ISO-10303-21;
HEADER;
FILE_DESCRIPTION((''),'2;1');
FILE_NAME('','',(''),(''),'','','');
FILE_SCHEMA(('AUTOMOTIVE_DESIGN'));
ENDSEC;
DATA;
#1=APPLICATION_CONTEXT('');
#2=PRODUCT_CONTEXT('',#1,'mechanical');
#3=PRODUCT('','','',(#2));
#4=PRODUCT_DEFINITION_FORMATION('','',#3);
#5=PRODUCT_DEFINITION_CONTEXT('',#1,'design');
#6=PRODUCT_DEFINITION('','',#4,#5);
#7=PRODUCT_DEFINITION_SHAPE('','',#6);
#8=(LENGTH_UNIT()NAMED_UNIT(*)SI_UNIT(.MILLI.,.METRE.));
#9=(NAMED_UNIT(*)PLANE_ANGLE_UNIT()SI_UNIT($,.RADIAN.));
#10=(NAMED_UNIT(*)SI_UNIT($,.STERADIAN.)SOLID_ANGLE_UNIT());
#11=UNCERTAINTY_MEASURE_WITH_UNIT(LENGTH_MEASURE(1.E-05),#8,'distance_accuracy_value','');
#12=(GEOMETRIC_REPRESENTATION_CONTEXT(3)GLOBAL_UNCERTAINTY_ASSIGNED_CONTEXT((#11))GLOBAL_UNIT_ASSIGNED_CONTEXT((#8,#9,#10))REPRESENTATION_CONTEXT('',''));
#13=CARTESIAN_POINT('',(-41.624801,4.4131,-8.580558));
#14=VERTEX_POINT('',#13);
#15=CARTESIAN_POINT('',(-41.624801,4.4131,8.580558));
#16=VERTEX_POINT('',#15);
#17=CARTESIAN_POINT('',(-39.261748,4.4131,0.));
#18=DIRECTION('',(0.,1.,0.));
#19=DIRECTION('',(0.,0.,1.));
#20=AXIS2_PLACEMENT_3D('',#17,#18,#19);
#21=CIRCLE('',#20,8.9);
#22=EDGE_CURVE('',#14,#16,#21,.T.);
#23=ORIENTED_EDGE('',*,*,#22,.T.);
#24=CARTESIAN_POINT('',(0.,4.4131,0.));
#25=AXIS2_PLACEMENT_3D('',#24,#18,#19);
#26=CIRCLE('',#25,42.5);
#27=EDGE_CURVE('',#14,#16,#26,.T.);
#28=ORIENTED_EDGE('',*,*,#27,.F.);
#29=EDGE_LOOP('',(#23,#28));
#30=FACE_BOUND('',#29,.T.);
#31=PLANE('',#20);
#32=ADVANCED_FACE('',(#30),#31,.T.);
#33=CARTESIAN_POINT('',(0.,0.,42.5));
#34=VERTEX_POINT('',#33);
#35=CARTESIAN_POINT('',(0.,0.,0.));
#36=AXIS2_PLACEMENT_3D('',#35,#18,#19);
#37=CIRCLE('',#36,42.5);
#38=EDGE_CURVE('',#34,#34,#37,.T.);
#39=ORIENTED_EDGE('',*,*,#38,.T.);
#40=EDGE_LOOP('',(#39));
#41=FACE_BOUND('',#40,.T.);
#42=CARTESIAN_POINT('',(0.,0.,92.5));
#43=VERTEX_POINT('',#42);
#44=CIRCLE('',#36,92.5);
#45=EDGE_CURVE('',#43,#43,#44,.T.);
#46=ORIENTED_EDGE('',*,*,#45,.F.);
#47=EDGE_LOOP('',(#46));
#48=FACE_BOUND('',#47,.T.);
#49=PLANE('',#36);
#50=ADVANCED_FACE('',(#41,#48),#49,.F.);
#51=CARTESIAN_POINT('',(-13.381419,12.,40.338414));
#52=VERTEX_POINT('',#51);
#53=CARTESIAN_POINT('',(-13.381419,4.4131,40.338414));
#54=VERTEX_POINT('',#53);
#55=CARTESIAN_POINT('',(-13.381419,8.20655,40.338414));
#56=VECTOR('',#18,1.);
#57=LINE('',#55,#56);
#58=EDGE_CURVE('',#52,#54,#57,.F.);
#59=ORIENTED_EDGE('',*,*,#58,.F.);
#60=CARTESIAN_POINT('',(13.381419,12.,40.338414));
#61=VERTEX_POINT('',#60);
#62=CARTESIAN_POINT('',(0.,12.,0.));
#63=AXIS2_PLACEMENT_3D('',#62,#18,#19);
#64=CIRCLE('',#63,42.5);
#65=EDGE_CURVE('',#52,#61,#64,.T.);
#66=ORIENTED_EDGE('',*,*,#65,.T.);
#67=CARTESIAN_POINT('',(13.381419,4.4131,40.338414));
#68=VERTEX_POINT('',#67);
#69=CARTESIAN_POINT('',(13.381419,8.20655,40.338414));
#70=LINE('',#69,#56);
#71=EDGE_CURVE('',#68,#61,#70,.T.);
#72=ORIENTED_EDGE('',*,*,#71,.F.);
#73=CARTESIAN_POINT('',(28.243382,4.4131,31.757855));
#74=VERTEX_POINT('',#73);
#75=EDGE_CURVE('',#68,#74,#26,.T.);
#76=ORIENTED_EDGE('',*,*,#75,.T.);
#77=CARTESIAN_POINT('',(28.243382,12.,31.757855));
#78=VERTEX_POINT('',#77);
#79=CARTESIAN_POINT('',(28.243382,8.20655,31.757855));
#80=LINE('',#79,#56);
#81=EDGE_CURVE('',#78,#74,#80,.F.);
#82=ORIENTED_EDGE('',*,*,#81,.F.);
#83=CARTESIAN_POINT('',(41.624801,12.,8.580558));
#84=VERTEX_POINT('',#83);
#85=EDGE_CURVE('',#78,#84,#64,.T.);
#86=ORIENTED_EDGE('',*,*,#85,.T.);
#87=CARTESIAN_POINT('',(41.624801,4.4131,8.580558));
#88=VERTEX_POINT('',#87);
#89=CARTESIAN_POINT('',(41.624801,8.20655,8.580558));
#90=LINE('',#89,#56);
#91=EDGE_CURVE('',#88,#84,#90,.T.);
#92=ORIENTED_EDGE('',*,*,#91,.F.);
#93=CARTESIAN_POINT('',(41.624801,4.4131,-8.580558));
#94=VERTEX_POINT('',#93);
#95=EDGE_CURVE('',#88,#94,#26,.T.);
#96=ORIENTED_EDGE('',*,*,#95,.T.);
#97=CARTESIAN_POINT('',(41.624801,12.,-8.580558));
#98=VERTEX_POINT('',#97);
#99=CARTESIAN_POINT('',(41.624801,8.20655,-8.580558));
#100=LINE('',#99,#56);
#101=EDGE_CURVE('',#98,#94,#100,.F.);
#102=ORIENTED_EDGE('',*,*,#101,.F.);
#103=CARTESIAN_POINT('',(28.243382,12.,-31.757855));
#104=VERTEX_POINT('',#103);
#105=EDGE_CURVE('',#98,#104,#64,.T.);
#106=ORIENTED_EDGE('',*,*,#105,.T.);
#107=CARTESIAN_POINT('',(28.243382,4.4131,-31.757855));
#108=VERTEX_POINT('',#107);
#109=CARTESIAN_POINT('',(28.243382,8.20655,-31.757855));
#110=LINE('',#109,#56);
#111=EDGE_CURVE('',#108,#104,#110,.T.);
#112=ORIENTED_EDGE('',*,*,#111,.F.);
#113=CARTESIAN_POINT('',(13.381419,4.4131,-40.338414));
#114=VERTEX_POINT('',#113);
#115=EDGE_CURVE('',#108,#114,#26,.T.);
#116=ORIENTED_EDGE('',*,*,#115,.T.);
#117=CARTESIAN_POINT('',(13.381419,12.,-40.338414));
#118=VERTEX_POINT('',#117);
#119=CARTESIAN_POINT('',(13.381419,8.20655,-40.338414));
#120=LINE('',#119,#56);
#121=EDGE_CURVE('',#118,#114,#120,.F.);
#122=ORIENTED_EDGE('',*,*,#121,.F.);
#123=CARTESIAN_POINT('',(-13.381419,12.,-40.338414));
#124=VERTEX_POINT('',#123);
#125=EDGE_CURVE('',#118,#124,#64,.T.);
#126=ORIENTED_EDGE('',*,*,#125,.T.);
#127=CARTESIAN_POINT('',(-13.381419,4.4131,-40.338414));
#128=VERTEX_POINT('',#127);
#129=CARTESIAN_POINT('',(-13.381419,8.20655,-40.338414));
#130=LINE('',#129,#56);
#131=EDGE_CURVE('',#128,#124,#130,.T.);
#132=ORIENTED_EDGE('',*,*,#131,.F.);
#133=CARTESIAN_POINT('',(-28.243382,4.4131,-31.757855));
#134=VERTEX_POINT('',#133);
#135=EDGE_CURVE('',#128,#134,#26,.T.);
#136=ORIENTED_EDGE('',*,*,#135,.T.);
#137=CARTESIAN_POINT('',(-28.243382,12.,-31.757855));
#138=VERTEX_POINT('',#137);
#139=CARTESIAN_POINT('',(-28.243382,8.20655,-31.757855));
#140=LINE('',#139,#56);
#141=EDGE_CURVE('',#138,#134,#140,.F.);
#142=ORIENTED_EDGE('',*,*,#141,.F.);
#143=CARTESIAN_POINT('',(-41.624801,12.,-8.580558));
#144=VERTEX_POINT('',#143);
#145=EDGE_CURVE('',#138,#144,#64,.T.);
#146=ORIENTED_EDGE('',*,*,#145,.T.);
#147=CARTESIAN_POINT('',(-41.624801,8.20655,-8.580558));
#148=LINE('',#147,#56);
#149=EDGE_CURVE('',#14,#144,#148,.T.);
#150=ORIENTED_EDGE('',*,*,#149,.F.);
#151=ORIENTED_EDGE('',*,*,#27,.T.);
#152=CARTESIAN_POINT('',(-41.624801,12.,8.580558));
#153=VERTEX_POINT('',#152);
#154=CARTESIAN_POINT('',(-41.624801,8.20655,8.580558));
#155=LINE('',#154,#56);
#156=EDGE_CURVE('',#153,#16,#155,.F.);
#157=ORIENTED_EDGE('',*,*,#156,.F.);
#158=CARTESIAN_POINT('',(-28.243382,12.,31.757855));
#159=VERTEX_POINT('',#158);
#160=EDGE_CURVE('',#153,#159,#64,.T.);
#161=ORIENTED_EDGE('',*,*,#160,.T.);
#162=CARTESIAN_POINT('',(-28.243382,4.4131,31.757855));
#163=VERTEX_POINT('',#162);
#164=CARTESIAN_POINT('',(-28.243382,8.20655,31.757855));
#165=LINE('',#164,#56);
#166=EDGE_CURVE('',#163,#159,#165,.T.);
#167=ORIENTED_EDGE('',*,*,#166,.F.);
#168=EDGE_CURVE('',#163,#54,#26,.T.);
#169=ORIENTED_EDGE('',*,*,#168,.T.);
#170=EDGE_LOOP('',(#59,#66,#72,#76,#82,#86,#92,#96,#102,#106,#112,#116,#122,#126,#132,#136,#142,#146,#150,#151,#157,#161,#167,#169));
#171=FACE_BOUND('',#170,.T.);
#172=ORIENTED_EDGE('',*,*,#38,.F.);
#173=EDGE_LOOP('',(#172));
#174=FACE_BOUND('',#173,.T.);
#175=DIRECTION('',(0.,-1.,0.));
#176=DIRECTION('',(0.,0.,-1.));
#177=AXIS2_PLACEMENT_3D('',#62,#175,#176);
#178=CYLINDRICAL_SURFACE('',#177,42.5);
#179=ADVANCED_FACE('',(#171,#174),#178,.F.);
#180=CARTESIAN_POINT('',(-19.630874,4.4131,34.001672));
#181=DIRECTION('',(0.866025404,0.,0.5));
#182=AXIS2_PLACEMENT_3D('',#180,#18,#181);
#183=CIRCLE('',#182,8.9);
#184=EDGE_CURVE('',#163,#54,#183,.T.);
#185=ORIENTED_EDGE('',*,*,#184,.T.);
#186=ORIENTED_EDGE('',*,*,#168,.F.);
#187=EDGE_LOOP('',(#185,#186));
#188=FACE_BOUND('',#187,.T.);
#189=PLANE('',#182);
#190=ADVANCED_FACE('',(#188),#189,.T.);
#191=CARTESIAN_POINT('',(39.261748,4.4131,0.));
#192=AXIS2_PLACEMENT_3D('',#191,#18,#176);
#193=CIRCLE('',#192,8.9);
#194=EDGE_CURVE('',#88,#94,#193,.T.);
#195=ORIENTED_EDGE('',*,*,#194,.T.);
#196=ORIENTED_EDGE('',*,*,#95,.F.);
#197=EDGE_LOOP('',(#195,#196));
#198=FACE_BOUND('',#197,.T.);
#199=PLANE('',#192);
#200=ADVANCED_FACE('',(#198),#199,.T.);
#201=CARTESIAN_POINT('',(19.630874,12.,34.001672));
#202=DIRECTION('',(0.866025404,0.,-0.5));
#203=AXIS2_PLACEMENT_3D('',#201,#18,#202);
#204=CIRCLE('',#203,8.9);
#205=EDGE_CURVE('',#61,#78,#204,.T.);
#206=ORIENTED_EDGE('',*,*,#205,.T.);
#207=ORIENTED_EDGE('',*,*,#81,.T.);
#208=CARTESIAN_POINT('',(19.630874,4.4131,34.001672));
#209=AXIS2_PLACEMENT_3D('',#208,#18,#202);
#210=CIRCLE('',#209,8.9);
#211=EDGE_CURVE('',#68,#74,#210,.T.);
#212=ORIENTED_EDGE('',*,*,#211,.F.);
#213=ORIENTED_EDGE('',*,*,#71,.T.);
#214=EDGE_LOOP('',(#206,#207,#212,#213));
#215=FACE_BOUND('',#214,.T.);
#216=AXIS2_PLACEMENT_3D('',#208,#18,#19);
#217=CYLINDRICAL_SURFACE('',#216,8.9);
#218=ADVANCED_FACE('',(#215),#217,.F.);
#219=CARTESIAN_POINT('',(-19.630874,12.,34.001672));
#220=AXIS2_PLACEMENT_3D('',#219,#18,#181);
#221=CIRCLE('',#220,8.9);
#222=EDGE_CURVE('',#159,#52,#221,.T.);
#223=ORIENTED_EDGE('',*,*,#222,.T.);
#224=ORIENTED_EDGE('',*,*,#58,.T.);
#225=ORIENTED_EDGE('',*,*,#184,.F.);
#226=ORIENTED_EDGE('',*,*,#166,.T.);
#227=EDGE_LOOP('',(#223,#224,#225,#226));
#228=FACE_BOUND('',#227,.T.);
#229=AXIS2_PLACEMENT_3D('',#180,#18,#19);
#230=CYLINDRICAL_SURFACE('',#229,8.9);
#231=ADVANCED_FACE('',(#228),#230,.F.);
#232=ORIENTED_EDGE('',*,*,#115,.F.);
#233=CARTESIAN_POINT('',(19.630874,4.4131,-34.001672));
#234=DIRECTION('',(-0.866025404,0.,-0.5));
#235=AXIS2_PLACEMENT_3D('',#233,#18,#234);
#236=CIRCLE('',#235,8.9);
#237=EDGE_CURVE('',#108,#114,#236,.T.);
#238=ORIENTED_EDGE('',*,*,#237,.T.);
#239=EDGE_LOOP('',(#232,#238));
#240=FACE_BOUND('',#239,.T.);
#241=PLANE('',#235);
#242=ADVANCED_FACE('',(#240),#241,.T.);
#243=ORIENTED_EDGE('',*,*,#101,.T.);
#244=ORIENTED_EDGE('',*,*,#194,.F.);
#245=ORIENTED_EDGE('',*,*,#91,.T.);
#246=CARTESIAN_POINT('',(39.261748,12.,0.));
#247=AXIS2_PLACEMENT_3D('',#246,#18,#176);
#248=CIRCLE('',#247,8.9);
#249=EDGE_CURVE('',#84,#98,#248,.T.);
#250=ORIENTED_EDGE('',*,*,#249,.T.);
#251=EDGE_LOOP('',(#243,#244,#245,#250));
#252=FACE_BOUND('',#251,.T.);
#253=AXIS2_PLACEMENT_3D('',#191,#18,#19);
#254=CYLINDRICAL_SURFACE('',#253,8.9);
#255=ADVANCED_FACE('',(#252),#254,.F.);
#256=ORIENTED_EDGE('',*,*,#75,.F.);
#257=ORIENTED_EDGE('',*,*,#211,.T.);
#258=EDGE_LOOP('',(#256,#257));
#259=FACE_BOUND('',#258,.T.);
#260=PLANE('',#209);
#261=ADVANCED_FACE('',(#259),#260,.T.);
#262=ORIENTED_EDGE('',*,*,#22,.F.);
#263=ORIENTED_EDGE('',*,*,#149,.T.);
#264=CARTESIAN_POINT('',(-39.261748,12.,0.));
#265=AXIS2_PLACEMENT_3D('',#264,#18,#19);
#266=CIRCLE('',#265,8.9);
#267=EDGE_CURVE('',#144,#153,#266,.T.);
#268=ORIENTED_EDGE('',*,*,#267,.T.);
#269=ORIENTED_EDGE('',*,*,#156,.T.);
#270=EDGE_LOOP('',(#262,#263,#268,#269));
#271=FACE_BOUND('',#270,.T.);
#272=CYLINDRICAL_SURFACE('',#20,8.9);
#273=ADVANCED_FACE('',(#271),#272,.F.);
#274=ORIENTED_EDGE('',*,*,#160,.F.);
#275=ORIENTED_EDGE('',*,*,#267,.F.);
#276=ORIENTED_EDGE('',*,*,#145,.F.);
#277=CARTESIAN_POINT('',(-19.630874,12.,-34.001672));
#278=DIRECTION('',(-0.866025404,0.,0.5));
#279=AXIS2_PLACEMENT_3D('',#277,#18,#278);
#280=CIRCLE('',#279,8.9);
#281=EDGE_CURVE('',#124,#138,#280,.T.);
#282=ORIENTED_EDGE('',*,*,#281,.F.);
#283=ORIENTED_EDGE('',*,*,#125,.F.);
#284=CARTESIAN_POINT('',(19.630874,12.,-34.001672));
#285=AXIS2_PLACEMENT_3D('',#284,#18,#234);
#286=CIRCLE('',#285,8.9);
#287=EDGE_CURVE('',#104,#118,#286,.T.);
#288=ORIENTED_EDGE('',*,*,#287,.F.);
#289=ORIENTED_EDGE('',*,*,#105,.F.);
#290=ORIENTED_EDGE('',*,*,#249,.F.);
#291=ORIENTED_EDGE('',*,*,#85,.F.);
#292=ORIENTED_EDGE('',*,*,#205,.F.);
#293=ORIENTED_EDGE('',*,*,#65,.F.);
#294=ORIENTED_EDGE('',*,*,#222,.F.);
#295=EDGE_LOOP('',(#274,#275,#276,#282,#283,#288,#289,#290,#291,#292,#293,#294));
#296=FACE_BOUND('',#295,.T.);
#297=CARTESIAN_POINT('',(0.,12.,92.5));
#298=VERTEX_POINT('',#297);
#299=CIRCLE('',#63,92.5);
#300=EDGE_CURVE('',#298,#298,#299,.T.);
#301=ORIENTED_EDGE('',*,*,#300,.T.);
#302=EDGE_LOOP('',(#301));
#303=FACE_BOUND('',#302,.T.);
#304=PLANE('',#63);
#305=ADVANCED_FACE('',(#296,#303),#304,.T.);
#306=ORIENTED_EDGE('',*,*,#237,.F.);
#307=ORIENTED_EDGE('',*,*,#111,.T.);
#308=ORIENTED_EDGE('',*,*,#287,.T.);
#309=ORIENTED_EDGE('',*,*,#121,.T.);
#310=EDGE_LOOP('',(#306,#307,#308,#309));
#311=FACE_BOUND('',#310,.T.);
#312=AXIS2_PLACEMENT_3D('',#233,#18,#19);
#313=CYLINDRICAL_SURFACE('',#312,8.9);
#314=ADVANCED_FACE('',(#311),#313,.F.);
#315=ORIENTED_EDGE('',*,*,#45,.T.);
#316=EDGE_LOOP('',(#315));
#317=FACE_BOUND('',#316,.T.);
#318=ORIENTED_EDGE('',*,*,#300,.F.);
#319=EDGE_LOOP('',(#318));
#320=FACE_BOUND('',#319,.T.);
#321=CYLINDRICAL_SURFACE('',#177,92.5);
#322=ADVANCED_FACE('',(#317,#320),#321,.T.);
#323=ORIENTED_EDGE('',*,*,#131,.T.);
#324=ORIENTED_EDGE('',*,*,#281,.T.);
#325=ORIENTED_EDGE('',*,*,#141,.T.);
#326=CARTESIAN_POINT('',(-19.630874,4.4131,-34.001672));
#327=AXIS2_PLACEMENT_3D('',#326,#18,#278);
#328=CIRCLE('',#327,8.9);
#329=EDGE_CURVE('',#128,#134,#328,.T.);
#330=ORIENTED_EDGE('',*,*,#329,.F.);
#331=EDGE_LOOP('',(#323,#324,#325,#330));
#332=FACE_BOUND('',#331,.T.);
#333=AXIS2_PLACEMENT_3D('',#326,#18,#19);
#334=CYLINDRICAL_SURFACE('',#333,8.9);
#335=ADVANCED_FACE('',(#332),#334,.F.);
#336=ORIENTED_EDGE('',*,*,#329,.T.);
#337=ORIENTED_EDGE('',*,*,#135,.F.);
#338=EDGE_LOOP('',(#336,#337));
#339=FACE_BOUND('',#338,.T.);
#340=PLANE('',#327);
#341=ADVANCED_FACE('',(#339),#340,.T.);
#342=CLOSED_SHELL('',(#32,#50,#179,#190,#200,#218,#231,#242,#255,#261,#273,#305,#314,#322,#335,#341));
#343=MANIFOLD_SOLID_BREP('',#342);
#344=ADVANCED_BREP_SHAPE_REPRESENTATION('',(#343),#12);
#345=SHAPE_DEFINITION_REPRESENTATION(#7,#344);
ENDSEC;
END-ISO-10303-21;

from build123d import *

# Parameters (mm, degrees)
SKETCH1_R           = 92.5
BOSS_EXTRUDE1_DEPTH = 12
SKETCH2_R           = 42.5
CUT_EXTRUDE1_DEPTH  = 132.363998112
SKETCH3_R           = 8.89999986
CUT_EXTRUDE2_DEPTH  = 7.586899505
CIRPATTERN1_COUNT   = 6


with BuildPart() as part:
    # Sketch1 → Boss-Extrude1 (new body)
    with BuildSketch(Plane(origin=(0, 0, 0), x_dir=(1, 0, 0), z_dir=(0, 1, 0))):
        Circle(SKETCH1_R)
    extrude(amount=BOSS_EXTRUDE1_DEPTH)

    # Sketch2 → Cut-Extrude1 (cut, through all)
    with BuildSketch(Plane(origin=(0, 0, 0), x_dir=(1, 0, 0), z_dir=(0, 1, 0))):
        Circle(SKETCH2_R)
    extrude(amount=CUT_EXTRUDE1_DEPTH, mode=Mode.SUBTRACT)

    # Sketch3 → Cut-Extrude2 (cut)
    with BuildSketch(Plane(origin=(0, 12, 0), x_dir=(1, 0, 0), z_dir=(0, 1, 0))):
        with Locations((-39.261748447, 0)):
            Circle(SKETCH3_R)
    cut_extrude2 = extrude(amount=-CUT_EXTRUDE2_DEPTH, mode=Mode.SUBTRACT)

    # CirPattern1: Cut-Extrude2 ×6 about axis
    cirpattern1_axis = Axis((0, 0, 0), (0, 1, 0))
    for i in range(1, CIRPATTERN1_COUNT):
        add(cut_extrude2.rotate(cirpattern1_axis, i * 360 / CIRPATTERN1_COUNT), mode=Mode.SUBTRACT)


solid = part.part
